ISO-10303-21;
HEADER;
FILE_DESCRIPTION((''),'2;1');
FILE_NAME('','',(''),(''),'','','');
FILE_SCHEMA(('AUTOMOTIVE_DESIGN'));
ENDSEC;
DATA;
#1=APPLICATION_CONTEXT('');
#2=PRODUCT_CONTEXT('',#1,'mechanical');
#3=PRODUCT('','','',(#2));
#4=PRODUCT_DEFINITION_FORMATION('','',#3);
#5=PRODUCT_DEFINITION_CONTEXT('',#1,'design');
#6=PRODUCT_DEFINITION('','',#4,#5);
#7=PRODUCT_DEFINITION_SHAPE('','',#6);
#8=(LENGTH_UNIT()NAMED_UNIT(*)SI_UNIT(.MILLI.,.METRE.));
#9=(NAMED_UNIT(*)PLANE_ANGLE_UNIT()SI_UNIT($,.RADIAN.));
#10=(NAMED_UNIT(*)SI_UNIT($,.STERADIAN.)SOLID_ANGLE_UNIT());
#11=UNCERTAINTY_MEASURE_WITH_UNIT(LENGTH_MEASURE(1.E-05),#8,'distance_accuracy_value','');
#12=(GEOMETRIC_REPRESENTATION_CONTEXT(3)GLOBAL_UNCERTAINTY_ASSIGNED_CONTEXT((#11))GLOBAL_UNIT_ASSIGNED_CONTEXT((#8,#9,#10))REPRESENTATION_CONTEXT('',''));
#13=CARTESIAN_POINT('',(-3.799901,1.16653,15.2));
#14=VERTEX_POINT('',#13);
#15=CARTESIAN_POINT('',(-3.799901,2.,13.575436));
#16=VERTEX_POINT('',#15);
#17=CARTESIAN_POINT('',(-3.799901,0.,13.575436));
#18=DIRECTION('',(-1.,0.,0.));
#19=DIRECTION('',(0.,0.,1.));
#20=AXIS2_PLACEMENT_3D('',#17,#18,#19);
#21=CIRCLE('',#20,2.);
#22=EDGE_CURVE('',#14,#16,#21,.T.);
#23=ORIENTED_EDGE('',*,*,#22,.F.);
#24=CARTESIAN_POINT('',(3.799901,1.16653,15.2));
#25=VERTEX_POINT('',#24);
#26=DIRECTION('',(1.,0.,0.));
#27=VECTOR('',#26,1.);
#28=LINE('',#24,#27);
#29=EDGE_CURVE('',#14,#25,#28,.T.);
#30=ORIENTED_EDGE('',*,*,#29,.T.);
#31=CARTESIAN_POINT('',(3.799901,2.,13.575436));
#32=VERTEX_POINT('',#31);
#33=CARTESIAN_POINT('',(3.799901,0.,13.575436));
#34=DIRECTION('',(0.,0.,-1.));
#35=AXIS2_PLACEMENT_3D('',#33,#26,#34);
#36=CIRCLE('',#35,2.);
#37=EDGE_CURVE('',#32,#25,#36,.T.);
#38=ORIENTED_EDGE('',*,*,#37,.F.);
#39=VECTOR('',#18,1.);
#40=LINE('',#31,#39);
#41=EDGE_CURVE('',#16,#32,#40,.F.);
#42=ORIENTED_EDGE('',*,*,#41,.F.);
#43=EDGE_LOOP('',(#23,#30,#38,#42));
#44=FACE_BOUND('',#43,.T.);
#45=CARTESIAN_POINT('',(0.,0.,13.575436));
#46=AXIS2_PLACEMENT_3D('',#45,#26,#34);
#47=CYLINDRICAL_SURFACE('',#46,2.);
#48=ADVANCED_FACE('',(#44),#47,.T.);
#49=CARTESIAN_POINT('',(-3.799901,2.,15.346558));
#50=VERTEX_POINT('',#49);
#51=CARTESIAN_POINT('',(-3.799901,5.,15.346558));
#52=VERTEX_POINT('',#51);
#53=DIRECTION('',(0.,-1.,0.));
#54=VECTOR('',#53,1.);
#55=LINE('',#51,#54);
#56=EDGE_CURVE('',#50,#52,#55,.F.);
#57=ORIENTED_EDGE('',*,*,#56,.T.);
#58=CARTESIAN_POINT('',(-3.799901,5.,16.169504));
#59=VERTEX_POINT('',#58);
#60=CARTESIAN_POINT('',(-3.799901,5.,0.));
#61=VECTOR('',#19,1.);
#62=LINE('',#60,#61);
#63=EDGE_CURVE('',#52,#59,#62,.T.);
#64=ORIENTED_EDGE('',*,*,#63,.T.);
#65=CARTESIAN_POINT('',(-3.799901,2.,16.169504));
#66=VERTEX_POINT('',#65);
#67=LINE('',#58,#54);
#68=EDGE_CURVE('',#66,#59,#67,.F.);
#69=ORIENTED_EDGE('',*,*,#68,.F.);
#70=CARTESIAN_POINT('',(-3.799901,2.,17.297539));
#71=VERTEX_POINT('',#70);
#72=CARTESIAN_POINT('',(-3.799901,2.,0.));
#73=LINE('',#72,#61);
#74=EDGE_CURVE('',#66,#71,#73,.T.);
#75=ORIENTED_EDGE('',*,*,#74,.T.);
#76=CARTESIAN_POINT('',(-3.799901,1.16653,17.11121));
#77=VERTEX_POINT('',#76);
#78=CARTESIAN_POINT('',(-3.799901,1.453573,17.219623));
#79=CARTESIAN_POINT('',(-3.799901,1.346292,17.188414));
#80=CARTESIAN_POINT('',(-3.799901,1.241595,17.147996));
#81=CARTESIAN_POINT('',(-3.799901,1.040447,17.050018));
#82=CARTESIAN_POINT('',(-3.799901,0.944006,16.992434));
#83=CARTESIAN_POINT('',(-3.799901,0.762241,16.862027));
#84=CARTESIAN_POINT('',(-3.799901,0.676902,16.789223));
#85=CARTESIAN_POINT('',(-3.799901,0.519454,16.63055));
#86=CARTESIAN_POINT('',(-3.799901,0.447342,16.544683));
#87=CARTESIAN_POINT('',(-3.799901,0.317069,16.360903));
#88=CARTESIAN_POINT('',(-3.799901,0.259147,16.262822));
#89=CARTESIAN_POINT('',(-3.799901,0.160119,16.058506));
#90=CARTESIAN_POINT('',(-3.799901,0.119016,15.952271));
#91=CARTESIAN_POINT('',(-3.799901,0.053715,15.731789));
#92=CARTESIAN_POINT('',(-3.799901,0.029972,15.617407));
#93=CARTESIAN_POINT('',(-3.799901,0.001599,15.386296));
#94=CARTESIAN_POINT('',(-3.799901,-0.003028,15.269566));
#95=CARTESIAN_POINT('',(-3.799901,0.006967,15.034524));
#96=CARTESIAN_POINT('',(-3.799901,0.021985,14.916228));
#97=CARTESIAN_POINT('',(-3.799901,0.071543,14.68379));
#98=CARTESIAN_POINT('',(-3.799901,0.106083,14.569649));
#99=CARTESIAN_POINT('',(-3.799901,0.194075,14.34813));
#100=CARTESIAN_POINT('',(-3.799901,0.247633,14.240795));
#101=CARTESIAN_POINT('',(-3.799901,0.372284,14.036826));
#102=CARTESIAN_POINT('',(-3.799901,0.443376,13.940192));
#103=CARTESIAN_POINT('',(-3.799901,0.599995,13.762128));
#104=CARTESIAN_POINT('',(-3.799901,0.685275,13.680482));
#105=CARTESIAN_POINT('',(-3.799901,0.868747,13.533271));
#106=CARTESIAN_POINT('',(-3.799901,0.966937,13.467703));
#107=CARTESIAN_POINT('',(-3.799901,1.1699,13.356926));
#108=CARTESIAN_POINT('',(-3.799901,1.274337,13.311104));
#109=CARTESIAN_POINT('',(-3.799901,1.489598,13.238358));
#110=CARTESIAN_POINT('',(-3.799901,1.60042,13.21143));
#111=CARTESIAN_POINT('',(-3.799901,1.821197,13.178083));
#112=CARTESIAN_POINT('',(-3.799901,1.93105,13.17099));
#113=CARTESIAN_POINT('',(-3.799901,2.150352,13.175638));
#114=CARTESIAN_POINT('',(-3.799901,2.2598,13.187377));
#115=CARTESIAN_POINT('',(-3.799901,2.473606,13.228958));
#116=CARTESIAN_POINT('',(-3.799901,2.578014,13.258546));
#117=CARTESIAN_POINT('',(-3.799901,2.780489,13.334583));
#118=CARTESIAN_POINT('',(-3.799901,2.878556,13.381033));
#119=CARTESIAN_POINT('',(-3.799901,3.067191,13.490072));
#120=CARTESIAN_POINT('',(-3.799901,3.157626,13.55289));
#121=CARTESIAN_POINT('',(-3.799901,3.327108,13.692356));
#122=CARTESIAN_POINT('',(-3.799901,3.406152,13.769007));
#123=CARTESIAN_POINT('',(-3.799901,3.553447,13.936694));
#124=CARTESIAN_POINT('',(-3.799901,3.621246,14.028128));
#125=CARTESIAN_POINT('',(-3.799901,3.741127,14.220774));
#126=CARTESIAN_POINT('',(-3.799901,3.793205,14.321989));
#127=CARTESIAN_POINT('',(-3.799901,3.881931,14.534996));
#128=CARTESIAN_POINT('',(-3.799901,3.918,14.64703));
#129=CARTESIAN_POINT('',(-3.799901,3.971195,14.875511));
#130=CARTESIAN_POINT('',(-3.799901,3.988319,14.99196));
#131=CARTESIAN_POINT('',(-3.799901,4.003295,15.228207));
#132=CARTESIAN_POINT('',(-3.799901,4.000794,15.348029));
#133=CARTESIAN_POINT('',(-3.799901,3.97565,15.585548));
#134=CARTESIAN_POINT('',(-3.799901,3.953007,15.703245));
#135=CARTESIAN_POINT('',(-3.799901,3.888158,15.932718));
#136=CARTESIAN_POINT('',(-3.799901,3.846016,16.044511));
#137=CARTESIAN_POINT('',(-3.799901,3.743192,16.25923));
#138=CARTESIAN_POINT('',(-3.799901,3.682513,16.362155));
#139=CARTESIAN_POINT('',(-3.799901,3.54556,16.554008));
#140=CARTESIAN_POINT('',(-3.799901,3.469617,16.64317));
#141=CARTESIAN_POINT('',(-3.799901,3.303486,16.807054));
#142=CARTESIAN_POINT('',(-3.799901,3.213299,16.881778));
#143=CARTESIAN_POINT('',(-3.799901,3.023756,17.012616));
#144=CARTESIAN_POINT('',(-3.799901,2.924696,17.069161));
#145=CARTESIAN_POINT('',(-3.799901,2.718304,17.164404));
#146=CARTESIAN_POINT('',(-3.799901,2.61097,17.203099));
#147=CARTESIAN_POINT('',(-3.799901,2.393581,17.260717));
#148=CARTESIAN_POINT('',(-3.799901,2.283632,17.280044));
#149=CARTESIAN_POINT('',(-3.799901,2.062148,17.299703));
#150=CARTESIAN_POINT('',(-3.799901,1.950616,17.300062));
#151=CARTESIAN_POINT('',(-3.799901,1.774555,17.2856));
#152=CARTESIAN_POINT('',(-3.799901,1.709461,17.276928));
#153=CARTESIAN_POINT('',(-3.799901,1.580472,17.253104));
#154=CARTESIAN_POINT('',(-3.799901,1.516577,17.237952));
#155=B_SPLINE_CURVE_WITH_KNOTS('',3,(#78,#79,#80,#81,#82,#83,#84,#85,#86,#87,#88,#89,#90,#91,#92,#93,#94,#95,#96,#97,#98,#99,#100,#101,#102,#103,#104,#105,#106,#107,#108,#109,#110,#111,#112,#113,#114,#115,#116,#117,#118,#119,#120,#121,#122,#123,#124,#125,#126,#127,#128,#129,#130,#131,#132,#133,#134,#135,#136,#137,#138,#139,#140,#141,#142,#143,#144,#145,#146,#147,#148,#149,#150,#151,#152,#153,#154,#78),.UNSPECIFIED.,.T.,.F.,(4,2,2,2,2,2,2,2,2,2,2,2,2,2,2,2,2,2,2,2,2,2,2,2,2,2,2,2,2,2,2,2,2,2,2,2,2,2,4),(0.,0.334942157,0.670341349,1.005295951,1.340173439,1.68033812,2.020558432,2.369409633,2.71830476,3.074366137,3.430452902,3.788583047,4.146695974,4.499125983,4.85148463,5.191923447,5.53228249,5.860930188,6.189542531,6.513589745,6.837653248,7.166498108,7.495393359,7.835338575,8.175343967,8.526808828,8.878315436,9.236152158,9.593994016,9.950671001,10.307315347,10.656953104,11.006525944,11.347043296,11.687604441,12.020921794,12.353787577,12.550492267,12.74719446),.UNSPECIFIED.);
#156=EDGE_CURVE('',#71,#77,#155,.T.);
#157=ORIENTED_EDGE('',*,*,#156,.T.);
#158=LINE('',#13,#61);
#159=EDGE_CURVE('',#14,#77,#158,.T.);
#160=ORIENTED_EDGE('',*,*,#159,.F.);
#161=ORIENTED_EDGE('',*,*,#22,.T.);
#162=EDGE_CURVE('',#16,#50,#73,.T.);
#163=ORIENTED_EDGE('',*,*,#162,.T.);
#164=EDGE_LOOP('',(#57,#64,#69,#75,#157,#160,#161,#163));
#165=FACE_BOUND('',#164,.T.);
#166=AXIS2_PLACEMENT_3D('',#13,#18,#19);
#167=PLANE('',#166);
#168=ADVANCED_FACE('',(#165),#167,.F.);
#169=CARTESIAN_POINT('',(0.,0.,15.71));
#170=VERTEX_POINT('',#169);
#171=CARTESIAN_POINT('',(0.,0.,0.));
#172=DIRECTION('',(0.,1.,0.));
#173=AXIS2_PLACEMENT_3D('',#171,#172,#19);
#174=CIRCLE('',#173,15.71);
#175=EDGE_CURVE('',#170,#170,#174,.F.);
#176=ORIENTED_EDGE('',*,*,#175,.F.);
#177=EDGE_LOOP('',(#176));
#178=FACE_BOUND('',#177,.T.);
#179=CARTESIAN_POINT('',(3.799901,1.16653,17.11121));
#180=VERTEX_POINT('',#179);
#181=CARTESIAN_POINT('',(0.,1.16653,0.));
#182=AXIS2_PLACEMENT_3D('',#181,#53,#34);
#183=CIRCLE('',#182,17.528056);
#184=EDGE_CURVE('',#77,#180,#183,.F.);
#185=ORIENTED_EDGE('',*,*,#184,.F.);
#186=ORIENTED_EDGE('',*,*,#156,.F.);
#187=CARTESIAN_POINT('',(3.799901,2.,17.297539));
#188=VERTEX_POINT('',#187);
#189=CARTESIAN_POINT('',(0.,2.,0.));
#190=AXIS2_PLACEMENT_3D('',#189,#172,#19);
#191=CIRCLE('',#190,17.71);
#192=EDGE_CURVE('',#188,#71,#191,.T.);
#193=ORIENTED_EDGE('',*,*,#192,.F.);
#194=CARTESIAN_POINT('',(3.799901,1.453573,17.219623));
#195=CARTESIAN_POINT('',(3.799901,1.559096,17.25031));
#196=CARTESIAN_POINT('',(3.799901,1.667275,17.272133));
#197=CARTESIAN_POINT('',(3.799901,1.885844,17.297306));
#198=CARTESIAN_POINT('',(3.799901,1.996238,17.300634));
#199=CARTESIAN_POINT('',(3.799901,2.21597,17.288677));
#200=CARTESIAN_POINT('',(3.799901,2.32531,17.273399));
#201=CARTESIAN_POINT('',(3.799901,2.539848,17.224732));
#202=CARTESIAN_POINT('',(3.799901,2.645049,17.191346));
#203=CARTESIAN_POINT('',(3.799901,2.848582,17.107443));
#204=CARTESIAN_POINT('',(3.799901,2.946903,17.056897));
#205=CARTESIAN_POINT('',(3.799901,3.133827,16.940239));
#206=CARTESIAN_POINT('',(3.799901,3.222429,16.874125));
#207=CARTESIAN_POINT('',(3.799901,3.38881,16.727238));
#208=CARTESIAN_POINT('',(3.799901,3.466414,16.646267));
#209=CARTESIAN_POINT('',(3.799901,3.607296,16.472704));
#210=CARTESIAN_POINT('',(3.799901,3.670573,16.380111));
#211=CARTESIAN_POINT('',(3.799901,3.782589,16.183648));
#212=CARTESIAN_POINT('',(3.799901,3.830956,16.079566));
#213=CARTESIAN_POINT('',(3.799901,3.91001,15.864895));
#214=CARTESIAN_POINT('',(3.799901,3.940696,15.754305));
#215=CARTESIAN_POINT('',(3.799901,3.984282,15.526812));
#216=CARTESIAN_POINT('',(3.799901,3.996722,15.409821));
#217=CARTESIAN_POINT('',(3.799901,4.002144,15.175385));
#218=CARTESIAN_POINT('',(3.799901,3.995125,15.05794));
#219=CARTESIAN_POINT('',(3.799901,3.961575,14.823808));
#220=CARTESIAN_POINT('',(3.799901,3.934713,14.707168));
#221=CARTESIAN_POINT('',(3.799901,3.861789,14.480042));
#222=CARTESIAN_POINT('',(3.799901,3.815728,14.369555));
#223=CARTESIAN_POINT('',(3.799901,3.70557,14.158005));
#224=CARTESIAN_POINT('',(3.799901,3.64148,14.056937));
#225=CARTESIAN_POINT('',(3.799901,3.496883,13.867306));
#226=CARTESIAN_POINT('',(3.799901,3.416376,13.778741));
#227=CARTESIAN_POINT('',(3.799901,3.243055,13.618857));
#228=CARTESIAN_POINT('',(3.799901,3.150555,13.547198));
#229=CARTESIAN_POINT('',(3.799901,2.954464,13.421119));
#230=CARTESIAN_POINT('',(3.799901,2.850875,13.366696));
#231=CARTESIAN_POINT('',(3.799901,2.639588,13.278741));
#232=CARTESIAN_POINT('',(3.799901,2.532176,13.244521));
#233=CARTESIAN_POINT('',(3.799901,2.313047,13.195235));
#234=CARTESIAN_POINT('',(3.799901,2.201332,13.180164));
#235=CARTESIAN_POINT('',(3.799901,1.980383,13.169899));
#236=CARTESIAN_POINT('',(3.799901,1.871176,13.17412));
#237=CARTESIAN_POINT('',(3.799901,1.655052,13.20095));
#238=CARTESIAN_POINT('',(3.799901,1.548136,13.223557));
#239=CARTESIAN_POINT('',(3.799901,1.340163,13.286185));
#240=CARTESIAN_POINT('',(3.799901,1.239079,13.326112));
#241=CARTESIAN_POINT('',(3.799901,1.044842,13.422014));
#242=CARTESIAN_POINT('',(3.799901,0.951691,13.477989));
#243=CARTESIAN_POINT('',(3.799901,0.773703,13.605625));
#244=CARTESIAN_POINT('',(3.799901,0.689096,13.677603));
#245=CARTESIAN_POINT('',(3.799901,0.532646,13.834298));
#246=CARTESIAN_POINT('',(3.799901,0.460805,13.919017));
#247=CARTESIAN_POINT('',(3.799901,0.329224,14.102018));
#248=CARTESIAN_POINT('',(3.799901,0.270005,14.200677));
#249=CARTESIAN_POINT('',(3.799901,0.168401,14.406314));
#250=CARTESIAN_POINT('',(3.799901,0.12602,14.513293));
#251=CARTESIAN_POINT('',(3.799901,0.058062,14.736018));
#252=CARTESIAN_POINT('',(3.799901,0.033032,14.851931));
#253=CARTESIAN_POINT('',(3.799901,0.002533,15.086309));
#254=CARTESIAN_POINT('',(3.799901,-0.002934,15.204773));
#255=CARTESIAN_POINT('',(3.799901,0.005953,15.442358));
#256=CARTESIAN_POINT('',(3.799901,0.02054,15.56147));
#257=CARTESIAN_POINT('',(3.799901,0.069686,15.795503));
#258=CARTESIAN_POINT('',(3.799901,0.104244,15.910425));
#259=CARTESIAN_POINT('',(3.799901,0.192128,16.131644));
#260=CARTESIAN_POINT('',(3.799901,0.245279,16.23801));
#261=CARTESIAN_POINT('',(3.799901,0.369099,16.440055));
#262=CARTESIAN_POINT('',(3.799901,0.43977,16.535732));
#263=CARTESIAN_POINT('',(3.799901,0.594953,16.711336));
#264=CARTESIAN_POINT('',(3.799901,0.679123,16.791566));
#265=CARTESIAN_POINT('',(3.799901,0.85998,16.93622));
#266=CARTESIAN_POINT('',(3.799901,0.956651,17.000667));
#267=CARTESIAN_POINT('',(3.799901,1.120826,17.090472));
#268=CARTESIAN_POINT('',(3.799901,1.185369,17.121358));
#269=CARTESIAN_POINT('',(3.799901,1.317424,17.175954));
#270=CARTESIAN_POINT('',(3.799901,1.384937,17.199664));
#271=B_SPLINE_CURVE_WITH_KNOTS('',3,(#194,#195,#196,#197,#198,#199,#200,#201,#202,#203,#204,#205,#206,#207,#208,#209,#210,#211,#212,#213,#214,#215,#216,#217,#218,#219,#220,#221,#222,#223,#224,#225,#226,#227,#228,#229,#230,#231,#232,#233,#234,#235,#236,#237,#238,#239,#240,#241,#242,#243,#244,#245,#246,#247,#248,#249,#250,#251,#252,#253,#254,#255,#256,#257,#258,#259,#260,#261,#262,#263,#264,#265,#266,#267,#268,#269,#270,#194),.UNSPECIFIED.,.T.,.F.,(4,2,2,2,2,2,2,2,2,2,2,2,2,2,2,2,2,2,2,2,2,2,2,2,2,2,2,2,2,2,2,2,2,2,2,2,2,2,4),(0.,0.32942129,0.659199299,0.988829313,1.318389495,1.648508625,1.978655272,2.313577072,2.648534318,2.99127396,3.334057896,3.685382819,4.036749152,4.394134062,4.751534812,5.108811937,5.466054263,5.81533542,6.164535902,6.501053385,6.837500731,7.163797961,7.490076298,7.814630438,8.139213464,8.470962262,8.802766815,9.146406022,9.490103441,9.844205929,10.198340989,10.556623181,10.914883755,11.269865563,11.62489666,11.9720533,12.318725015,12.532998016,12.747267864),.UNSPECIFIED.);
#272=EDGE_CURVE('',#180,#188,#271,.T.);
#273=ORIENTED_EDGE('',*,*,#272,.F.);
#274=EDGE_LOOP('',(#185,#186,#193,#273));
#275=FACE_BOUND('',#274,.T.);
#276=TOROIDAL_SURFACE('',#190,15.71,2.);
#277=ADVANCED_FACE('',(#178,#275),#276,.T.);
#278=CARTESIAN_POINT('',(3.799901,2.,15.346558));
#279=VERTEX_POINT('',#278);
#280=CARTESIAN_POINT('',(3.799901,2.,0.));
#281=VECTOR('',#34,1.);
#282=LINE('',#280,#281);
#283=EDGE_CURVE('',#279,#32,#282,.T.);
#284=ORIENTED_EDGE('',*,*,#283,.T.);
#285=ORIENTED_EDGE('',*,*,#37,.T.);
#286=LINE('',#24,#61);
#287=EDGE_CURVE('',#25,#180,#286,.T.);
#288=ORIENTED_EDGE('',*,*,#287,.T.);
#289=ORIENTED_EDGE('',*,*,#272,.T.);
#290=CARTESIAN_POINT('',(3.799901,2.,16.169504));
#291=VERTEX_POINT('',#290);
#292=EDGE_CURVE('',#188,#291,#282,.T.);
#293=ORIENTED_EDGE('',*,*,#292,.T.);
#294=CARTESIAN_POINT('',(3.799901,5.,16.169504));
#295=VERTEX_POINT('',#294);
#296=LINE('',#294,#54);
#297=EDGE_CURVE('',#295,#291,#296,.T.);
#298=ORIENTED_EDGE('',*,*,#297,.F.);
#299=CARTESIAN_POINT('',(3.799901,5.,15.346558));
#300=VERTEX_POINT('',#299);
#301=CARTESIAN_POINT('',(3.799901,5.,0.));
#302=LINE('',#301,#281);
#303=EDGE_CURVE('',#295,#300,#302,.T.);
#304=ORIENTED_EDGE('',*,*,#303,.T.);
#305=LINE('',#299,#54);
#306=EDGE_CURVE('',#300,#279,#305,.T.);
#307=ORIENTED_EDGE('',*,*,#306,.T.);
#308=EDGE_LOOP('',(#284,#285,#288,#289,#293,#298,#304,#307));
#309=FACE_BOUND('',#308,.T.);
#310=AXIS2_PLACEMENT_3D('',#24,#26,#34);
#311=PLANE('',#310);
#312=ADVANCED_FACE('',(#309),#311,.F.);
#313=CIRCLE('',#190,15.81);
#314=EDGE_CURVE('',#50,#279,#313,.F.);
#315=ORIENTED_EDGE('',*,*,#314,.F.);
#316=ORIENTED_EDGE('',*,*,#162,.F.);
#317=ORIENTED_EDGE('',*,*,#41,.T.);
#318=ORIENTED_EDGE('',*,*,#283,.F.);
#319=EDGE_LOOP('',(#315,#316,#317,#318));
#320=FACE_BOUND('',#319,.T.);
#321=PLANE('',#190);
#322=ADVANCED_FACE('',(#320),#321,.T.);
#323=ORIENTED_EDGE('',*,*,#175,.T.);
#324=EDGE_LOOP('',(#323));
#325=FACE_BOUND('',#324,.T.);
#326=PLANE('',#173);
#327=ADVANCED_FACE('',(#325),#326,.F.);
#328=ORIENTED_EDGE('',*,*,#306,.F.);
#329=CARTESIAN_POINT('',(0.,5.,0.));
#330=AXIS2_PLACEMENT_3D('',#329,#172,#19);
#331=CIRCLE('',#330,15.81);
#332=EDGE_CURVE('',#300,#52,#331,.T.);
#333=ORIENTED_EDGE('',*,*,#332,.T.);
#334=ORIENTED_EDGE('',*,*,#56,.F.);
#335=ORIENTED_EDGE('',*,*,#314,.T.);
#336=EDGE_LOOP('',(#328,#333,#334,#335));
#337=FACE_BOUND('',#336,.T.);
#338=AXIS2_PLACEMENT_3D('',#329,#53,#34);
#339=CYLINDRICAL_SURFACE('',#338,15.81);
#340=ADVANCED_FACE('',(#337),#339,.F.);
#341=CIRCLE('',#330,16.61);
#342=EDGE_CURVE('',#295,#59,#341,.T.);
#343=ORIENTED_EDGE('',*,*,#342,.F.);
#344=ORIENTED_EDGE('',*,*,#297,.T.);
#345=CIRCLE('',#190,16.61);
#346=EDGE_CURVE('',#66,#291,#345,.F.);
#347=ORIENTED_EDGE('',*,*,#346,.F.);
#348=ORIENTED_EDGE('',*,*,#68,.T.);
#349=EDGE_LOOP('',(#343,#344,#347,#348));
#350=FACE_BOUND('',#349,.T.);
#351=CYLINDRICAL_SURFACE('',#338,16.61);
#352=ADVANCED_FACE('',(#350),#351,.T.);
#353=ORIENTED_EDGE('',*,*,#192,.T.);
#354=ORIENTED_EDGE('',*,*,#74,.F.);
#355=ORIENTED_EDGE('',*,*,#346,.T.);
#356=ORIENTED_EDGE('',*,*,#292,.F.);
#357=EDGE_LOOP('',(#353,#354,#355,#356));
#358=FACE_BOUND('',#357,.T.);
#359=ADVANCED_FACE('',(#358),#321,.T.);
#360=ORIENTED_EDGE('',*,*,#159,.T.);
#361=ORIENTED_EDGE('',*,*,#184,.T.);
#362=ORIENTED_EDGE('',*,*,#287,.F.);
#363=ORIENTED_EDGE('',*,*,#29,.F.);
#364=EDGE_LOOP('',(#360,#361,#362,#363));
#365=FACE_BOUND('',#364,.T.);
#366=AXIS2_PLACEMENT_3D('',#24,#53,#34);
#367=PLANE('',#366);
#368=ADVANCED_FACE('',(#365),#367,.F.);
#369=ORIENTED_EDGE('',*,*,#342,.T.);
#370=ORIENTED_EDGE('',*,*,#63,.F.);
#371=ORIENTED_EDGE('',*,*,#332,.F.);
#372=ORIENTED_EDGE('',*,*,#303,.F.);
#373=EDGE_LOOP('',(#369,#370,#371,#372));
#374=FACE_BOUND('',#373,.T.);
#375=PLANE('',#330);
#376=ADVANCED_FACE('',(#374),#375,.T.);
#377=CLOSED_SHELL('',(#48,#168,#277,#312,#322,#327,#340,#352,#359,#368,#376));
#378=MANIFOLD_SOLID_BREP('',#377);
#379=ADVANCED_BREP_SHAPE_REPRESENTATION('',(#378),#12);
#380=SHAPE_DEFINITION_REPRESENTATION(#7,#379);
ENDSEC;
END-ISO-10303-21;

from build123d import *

# Parameters (mm, degrees)
SKETCH1_R           = 17.71
BOSS_EXTRUDE1_DEPTH = 2
SKETCH1_3_R         = 16.61
SKETCH1_3_R_2       = 15.81
BOSS_EXTRUDE2_DEPTH = 5
FILLET1_R           = 2
SKETCH3_W           = 7.599801802
SKETCH3_H           = 7.043482716
CUT_EXTRUDE1_DEPTH  = 4.8
FILLET2_R           = 2


# Some blends are built 0.0001 mm under size
with BuildPart() as part:
    # Sketch1 → Boss-Extrude1 (new body)
    with BuildSketch(Plane(origin=(0, 0, 0), x_dir=(1, 0, 0), z_dir=(0, 1, 0))):
        with Locations(Location((0, 0, 0), (0, 0, 270))):
            Circle(SKETCH1_R)
    extrude(amount=BOSS_EXTRUDE1_DEPTH)

    # Sketch1<3> → Boss-Extrude2 (add)
    with BuildSketch(Plane(origin=(0, 0, 0), x_dir=(1, 0, 0), z_dir=(0, 1, 0))):
        with Locations(Location((0, 0, 0), (0, 0, 270))):
            Circle(SKETCH1_3_R)
        with Locations(Location((0, 0, 0), (0, 0, 270))):
            Circle(SKETCH1_3_R_2, mode=Mode.SUBTRACT)
    extrude(amount=BOSS_EXTRUDE2_DEPTH)

    # Fillet1
    fillet1_edges = [part.edges().sort_by_distance(p)[0] for p in [
        (0, 0, -17.71),
    ]]
    fillet(fillet1_edges, radius=FILLET1_R - 0.0001)  # a hair under: the kernel refuses the full size

    # Sketch3 → Cut-Extrude1 (cut)
    with BuildSketch(Plane.XY.offset(20)):
        with Locations((0, 4.688271449)):
            Rectangle(SKETCH3_W, SKETCH3_H)
    extrude(amount=-CUT_EXTRUDE1_DEPTH, mode=Mode.SUBTRACT)

    # Fillet2
    # the kernel refuses this fillet: 2 mm, written as the material it takes off along each edge
    with BuildSketch(Plane(origin=(3.799900901, 2, 15.2), x_dir=(0, 0, -1), z_dir=(-1, 0, 0))) as fillet2_piece_1:
        with BuildLine():
            CenterArc((1.624563802, 2), FILLET2_R, 215.680517758, 54.319482242)
            Line((0, 0.833469909), (-0.032491276, 0.810139307))
            ThreePointArc((-0.032491276, 0.810139307), (-0.04, 0.416734955), (-0.04, 0))
            Line((-0.04, 0), (0, -0.04))
            Line((0, -0.04), (1.624563802, -0.04))
            Line((1.624563802, -0.04), (1.624563802, 0))
        make_face()
    extrude(amount=7.599801803, mode=Mode.SUBTRACT)


solid = part.part
